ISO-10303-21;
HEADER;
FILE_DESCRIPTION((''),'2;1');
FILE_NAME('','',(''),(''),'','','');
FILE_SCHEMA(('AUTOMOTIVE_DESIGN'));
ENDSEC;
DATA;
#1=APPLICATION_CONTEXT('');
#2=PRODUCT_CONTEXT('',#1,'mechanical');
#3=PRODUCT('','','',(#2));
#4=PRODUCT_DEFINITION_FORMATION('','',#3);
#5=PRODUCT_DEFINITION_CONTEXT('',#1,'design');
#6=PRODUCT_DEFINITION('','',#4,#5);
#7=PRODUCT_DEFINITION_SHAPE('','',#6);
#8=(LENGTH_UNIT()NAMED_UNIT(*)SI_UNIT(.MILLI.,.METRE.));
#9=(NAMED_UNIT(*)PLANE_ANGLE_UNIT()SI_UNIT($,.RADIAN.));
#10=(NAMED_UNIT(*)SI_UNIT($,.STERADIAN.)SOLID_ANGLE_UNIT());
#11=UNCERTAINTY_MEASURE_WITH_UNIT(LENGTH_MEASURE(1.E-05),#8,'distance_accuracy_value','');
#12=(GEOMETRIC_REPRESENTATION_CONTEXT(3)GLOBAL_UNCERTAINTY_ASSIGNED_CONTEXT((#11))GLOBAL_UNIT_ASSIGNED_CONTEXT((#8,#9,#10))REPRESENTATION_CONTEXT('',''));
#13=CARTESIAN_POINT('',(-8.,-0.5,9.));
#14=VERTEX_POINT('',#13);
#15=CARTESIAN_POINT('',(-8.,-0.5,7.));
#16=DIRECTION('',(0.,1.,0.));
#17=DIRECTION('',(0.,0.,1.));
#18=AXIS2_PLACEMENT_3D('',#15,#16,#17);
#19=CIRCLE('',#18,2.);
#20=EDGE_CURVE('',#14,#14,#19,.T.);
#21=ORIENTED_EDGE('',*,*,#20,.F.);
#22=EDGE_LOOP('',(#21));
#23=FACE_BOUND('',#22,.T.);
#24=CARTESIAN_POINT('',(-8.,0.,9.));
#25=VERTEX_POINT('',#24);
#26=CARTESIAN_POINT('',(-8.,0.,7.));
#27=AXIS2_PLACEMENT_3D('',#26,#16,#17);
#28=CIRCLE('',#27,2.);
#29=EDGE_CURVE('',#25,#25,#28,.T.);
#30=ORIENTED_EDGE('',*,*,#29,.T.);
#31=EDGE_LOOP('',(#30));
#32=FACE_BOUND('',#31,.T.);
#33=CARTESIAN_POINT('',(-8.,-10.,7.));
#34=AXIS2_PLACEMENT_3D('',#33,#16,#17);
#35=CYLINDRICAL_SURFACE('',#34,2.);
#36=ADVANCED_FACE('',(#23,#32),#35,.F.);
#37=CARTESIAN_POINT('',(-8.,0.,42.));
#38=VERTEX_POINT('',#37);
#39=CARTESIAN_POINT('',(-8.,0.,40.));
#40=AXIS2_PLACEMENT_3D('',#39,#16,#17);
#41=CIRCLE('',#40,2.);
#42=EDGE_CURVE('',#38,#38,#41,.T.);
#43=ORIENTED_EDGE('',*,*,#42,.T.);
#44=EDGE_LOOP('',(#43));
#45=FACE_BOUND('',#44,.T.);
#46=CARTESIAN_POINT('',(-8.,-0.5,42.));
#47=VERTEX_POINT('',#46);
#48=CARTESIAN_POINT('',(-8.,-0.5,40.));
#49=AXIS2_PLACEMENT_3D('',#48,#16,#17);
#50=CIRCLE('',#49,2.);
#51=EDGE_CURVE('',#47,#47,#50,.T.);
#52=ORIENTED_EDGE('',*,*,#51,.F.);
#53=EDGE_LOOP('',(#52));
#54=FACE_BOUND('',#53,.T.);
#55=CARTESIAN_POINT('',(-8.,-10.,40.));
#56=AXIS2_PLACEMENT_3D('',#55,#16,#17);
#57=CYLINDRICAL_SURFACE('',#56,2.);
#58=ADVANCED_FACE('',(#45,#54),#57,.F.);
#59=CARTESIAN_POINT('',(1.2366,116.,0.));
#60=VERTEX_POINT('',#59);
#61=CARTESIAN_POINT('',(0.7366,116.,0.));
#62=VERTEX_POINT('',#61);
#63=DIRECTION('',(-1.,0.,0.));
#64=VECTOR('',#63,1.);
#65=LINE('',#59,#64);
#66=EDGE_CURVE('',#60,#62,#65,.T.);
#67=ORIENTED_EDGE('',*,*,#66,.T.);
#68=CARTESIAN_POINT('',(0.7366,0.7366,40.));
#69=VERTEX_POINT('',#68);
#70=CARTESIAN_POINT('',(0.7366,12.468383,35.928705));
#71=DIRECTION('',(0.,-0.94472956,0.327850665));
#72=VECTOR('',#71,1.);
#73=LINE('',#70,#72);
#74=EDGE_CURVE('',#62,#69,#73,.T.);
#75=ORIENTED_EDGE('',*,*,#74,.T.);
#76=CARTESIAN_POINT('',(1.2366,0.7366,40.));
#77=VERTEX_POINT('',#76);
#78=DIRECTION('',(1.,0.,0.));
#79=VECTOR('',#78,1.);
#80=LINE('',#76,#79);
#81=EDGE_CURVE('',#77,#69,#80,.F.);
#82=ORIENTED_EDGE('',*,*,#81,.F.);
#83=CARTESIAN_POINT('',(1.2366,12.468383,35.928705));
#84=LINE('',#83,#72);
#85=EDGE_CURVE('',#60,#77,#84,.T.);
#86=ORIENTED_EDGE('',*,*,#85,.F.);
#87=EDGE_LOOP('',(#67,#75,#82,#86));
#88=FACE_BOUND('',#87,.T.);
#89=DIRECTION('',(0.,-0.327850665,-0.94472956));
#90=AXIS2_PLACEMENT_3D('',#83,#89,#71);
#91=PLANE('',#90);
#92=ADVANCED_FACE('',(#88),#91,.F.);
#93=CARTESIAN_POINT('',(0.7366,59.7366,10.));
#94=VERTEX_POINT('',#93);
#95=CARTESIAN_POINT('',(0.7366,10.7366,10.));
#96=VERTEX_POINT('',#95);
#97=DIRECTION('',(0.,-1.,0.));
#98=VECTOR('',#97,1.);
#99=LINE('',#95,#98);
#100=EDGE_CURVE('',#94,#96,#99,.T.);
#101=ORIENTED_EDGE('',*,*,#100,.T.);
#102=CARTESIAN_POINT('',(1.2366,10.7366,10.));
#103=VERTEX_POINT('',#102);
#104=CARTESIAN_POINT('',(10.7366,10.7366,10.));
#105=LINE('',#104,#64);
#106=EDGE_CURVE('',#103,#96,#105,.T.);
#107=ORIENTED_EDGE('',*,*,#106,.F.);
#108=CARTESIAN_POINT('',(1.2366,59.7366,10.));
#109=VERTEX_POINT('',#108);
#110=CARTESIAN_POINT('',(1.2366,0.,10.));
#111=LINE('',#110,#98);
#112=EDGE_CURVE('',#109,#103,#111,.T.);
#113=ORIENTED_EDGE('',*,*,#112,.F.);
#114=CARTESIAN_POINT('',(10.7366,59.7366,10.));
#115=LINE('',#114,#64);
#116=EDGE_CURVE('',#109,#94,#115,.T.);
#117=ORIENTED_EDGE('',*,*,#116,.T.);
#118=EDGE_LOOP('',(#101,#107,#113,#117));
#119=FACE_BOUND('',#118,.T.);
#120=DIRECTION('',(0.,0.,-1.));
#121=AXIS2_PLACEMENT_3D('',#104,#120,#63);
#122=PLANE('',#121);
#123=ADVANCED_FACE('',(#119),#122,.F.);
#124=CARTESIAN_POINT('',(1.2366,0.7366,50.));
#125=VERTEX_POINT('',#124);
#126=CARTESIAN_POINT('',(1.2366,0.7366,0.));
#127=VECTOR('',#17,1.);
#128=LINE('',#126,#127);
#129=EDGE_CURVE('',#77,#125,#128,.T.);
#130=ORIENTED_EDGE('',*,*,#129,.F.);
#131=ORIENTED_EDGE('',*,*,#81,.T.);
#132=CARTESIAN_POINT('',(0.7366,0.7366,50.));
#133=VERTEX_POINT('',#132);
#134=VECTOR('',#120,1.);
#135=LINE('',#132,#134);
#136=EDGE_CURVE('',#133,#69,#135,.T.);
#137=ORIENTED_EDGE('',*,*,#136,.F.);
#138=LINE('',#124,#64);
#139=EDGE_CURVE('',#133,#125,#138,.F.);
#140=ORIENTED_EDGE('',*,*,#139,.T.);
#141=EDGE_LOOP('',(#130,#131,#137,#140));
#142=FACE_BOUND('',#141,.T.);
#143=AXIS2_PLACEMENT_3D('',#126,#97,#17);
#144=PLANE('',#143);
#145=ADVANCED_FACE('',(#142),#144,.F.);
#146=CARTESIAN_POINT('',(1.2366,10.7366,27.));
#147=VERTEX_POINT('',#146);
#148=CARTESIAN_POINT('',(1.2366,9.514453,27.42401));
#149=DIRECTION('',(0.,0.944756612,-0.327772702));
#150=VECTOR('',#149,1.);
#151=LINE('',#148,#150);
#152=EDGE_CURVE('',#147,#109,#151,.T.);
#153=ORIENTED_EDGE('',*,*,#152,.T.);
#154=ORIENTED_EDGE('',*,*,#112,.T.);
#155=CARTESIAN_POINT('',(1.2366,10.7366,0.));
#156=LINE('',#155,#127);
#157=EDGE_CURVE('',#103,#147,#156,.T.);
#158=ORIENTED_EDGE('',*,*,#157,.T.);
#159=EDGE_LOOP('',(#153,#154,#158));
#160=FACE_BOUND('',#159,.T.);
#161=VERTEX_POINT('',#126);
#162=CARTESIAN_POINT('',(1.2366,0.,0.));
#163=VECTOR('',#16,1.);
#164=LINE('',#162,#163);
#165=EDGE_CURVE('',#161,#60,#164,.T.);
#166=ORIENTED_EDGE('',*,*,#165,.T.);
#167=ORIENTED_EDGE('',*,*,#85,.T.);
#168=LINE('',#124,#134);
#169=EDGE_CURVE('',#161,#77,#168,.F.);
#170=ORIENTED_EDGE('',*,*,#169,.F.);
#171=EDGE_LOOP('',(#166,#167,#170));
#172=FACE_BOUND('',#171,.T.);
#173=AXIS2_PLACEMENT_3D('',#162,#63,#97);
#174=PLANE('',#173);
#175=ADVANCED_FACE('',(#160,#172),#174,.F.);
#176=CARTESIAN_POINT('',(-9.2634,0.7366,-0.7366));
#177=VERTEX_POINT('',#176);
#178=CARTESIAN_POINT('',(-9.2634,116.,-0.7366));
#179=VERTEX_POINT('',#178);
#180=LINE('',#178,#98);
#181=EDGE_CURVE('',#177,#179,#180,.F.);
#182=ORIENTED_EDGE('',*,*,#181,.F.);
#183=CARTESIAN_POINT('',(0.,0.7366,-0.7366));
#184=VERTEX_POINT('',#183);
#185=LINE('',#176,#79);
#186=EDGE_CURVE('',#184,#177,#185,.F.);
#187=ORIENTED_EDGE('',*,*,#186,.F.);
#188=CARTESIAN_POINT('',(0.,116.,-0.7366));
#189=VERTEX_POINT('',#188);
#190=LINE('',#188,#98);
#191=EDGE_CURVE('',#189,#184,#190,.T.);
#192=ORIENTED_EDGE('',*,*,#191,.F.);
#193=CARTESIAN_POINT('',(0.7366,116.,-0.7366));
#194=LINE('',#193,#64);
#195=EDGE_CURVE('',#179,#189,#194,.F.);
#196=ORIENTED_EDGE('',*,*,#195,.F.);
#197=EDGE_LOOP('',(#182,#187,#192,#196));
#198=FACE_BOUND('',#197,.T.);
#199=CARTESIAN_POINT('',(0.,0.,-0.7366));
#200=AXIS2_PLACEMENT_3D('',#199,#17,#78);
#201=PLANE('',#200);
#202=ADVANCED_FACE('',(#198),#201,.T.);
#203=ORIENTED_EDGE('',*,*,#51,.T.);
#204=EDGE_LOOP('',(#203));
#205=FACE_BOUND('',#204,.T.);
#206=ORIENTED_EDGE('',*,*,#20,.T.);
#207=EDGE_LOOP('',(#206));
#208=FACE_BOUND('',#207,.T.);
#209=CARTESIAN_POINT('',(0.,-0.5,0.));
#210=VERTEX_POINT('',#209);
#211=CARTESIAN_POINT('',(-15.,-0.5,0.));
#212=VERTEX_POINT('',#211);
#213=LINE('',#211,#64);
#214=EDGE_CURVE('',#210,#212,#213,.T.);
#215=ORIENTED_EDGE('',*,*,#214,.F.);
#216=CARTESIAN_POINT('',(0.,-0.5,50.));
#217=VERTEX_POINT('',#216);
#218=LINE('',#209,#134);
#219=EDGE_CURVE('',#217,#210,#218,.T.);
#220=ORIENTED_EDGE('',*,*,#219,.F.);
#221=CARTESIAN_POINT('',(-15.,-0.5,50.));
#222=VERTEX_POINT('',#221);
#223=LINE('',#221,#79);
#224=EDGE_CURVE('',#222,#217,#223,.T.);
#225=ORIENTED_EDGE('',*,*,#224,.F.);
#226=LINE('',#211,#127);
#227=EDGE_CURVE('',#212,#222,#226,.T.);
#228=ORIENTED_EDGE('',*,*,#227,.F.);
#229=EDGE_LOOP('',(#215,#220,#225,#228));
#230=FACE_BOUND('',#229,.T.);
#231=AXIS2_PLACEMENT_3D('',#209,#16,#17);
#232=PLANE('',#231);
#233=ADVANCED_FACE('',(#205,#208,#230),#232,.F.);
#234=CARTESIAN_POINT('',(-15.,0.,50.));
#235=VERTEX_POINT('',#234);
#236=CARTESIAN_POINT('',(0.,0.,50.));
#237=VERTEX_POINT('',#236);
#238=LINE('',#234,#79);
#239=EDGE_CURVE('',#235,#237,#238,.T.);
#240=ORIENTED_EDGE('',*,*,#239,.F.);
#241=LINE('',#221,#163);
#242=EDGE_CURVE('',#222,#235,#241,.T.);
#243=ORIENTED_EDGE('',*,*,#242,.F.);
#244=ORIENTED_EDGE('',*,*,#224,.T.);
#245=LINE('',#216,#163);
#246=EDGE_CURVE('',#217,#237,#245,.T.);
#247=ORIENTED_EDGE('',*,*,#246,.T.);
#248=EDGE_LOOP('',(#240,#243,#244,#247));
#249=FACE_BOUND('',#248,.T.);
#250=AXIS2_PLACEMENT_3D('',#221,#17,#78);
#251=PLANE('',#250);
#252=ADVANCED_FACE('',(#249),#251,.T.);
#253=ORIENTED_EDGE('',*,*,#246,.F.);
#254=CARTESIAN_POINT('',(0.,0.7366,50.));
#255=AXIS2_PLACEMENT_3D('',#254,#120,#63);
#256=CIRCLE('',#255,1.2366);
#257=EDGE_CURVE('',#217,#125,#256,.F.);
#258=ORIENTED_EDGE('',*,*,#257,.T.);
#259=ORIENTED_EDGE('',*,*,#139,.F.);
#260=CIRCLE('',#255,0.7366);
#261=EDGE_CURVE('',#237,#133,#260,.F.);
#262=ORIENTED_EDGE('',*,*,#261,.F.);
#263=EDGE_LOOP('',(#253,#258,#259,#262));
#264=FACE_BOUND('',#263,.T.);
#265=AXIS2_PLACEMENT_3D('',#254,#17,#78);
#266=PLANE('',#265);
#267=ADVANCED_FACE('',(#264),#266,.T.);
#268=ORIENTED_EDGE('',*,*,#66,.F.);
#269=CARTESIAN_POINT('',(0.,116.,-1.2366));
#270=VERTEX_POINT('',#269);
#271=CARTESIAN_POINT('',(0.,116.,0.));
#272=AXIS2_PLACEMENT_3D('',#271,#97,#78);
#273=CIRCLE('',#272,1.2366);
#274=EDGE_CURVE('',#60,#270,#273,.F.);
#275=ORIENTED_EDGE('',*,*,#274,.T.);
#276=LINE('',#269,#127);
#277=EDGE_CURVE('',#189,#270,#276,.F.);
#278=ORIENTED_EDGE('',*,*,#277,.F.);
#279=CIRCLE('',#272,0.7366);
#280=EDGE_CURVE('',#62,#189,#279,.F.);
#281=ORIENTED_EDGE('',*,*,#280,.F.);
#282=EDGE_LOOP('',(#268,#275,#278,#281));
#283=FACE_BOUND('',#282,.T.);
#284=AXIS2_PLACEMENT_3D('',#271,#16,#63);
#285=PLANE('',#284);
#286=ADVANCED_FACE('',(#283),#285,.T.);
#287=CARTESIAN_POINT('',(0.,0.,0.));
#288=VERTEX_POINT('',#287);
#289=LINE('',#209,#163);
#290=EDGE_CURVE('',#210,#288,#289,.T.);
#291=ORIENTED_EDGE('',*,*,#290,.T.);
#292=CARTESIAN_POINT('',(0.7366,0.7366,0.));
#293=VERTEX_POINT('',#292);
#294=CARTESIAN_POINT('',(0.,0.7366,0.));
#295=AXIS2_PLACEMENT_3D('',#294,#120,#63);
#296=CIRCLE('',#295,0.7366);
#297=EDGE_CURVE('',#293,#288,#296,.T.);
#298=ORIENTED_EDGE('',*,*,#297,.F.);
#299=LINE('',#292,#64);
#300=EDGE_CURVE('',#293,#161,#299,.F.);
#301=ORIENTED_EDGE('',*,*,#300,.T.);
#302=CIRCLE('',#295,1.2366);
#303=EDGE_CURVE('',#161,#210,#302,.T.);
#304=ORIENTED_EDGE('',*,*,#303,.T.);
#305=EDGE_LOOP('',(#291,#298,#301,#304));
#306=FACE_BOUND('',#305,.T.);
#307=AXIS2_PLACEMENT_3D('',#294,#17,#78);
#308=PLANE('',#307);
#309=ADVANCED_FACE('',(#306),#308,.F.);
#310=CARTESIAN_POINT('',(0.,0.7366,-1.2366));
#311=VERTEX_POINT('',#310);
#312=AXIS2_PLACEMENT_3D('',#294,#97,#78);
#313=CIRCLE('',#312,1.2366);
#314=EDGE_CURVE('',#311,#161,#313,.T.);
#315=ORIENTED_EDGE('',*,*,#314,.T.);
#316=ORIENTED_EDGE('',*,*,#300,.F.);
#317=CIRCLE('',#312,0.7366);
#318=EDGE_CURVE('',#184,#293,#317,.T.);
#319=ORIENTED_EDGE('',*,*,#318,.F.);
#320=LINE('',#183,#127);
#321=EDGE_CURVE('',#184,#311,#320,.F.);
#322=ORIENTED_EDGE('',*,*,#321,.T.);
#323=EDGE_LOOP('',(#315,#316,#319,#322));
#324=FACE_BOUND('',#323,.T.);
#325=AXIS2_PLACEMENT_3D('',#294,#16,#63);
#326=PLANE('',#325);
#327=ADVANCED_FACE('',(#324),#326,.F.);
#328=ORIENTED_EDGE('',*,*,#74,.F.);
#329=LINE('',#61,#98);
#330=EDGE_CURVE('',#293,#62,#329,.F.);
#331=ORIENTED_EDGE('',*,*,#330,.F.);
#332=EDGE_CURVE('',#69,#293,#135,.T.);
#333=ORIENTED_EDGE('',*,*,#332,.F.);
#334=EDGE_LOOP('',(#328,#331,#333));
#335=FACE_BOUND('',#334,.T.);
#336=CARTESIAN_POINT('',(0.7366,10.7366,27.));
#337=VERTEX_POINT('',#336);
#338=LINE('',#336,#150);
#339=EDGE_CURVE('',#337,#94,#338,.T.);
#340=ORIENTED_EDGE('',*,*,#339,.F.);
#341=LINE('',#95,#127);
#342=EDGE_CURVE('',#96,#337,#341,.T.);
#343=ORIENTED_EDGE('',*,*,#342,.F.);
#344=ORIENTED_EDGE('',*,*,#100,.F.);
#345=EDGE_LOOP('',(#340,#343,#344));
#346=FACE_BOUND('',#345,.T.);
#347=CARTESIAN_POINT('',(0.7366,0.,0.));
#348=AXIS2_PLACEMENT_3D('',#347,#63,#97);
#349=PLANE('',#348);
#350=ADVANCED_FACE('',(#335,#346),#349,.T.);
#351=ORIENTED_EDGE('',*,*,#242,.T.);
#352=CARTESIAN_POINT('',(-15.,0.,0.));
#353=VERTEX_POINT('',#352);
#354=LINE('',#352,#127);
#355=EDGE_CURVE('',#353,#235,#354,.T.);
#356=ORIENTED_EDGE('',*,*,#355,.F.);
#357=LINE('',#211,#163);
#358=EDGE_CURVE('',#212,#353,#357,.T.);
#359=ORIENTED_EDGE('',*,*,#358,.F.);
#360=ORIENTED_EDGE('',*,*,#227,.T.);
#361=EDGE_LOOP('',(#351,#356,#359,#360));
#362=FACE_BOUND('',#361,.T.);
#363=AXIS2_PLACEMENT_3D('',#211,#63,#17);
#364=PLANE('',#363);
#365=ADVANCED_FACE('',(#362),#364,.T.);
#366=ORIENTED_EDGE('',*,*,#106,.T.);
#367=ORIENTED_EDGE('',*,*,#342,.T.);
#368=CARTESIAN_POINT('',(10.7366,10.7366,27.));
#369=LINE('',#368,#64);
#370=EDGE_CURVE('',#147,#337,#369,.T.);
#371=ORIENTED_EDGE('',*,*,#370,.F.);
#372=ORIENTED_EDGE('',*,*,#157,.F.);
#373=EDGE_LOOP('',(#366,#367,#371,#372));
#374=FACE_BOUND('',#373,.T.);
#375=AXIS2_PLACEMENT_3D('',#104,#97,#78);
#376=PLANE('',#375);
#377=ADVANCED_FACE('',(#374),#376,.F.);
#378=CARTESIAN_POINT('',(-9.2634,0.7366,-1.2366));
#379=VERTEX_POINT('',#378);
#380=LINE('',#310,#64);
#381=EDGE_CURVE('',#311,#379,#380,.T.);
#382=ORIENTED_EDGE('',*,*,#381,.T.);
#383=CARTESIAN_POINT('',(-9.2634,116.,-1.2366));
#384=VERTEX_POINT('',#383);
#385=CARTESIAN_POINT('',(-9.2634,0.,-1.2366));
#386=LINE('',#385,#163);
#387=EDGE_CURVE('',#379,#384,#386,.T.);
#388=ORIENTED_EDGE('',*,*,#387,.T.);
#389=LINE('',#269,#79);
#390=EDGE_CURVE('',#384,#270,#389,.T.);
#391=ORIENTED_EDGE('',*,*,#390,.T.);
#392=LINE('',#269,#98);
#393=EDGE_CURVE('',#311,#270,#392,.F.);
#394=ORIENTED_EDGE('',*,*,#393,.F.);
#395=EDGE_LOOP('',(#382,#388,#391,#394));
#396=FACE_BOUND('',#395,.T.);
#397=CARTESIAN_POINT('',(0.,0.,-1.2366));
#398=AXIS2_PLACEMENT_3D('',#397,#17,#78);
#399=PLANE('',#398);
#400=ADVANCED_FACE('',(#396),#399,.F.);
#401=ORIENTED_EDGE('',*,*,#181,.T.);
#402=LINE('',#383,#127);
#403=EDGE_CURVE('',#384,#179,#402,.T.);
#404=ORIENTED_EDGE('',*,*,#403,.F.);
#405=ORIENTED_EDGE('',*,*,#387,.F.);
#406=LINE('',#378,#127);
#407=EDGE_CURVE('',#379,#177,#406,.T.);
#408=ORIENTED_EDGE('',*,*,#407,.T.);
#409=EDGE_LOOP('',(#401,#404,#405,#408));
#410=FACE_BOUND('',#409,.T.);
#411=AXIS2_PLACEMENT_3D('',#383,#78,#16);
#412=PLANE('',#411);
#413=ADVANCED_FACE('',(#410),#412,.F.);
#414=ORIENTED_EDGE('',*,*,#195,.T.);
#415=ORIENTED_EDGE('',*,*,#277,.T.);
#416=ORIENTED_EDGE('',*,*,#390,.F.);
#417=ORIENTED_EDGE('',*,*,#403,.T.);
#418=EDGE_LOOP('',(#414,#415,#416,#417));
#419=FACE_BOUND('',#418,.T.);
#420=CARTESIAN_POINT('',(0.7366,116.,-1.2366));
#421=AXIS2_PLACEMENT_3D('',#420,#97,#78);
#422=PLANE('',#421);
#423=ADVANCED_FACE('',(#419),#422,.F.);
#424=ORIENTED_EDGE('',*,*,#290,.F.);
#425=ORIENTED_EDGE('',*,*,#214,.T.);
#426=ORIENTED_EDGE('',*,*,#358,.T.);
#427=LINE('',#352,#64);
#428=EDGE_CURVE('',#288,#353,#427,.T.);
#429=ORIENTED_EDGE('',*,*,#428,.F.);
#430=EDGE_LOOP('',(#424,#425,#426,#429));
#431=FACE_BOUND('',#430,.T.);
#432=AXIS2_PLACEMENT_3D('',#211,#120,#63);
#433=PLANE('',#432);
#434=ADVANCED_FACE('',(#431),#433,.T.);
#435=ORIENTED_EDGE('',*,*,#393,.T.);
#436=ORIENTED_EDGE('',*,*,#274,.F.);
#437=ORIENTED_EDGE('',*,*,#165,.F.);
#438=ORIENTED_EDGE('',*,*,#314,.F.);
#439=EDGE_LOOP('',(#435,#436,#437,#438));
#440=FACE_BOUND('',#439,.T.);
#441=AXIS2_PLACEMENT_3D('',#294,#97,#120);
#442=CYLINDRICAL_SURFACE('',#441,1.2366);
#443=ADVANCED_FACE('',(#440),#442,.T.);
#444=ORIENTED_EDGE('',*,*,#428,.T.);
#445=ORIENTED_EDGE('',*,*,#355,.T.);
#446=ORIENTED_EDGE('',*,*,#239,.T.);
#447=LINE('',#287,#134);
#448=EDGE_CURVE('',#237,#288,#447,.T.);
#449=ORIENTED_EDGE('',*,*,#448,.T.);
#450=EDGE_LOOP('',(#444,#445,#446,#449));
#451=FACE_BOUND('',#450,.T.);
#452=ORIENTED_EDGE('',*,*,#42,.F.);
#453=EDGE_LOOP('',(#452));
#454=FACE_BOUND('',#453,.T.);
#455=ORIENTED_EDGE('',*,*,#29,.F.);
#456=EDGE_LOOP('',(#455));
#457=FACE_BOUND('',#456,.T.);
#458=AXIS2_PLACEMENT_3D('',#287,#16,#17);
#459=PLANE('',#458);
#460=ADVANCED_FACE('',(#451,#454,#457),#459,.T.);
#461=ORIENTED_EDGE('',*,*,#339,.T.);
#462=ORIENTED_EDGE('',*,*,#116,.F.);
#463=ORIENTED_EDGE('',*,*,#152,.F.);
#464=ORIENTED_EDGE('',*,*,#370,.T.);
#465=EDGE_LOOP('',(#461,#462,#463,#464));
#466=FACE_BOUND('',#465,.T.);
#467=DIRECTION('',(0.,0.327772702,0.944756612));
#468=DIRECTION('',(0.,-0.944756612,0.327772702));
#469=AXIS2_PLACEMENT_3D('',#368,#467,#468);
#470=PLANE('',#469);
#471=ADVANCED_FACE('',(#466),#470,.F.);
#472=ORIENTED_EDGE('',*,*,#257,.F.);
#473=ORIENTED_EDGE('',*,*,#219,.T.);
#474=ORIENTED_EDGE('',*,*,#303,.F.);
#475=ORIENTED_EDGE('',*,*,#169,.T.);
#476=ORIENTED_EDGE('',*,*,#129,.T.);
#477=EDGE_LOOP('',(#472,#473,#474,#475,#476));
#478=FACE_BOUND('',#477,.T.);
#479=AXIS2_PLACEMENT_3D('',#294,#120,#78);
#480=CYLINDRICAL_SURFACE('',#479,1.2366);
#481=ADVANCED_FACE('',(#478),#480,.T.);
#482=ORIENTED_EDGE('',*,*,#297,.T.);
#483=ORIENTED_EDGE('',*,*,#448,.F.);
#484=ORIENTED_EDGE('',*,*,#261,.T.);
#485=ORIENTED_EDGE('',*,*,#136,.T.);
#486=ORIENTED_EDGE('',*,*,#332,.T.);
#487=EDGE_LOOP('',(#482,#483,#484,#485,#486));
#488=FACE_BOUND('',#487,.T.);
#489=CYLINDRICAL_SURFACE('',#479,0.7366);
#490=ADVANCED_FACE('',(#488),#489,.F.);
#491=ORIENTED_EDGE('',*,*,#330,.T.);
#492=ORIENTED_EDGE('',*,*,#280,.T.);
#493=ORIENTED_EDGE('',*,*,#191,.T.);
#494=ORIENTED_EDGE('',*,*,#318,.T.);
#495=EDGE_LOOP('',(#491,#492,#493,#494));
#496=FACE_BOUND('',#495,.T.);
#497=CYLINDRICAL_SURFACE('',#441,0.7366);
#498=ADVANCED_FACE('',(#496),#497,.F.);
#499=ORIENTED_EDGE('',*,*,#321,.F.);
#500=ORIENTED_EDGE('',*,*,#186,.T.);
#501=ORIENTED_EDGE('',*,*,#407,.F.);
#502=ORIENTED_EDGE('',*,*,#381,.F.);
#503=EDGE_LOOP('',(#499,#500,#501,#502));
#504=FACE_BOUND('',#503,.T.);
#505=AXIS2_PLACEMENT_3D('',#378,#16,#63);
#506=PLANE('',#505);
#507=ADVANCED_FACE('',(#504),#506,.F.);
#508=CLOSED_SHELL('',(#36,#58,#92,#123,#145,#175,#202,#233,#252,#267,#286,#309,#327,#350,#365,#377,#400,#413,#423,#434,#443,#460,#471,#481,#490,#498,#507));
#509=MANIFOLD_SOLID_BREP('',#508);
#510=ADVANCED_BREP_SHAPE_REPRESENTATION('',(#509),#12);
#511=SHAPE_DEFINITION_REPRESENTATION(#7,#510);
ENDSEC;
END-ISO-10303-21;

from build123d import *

# Parameters (mm, degrees)
SKETCH2_W          = 15
SKETCH2_H          = 50
BASE_FLANGE1_DEPTH = 0.5
EDGE_FLANGE1_DEPTH = 50
CUT_EXTRUDE1_DEPTH = 10
CUT_EXTRUDE2_DEPTH = 10
SKETCH22_R         = 2
CUT_EXTRUDE3_DEPTH = 10
EDGE_FLANGE2_DEPTH = 115.2634


# Sheet-metal steps are written as plain solids
with BuildPart() as part:
    # Sketch2 → Base-Flange1 (new body)
    with BuildSketch(Plane(origin=(0, 0, 0), x_dir=(1, 0, 0), z_dir=(0, 1, 0))):
        with Locations((-7.5, -25)):
            Rectangle(SKETCH2_W, SKETCH2_H)
    extrude(amount=-BASE_FLANGE1_DEPTH)

    # Edge-Flange1 section (across the edge) → Edge-Flange1 (add)
    with BuildSketch(Plane(origin=(0.7366, 0, 50), x_dir=(-1, 0, 0), z_dir=(0, 0, -1))):
        with BuildLine():
            Line((-0.5, 0.7366), (-0.5, 116))
            Line((-0.5, 116), (0, 116))
            Line((0, 116), (0, 0.7366))
            ThreePointArc((0, 0.7366), (0.215745145, 0.215745145), (0.7366, 0))
            Line((0.7366, 0), (0.7366, -0.5))
            ThreePointArc((0.7366, -0.5), (-0.137808246, -0.137808246), (-0.5, 0.7366))
        make_face()
    extrude(amount=EDGE_FLANGE1_DEPTH)

    # Sketch19 → Cut-Extrude1 (cut)
    with BuildSketch(Plane.ZY.offset(-0.7366)):
        Polygon((50, 0.7366), (40, 0.7366), (0, 116), (50, 116), align=None)
    extrude(amount=-CUT_EXTRUDE1_DEPTH, mode=Mode.SUBTRACT)

    # Sketch21 → Cut-Extrude2 (cut)
    with BuildSketch(Plane.ZY.offset(-0.7366)):
        Polygon((10, 10.7366), (10, 59.7366), (27, 10.7366), align=None)
    extrude(amount=-CUT_EXTRUDE2_DEPTH, mode=Mode.SUBTRACT)

    # Sketch22 → Cut-Extrude3 (cut)
    with BuildSketch(Plane(origin=(0, 0, 0), x_dir=(1, 0, 0), z_dir=(0, 1, 0))):
        with Locations(Location((-8, -40, 0), (0, 0, 270))):
            Circle(SKETCH22_R)
        with Locations(Location((-8, -7, 0), (0, 0, 270))):
            Circle(SKETCH22_R)
    extrude(amount=-CUT_EXTRUDE3_DEPTH, mode=Mode.SUBTRACT)

    # Edge-Flange2 section (across the edge) → Edge-Flange2 (add)
    with BuildSketch(Plane(origin=(0.7366, 116, -0.7366), x_dir=(0, 0, 1), z_dir=(0, -1, 0))):
        with BuildLine():
            Line((-0.5, 0.7366), (-0.5, 10))
            Line((-0.5, 10), (0, 10))
            Line((0, 10), (0, 0.7366))
            ThreePointArc((0, 0.7366), (0.215745145, 0.215745145), (0.7366, 0))
            Line((0.7366, 0), (0.7366, -0.5))
            ThreePointArc((0.7366, -0.5), (-0.137808246, -0.137808246), (-0.5, 0.7366))
        make_face()
    extrude(amount=EDGE_FLANGE2_DEPTH)


solid = part.part
